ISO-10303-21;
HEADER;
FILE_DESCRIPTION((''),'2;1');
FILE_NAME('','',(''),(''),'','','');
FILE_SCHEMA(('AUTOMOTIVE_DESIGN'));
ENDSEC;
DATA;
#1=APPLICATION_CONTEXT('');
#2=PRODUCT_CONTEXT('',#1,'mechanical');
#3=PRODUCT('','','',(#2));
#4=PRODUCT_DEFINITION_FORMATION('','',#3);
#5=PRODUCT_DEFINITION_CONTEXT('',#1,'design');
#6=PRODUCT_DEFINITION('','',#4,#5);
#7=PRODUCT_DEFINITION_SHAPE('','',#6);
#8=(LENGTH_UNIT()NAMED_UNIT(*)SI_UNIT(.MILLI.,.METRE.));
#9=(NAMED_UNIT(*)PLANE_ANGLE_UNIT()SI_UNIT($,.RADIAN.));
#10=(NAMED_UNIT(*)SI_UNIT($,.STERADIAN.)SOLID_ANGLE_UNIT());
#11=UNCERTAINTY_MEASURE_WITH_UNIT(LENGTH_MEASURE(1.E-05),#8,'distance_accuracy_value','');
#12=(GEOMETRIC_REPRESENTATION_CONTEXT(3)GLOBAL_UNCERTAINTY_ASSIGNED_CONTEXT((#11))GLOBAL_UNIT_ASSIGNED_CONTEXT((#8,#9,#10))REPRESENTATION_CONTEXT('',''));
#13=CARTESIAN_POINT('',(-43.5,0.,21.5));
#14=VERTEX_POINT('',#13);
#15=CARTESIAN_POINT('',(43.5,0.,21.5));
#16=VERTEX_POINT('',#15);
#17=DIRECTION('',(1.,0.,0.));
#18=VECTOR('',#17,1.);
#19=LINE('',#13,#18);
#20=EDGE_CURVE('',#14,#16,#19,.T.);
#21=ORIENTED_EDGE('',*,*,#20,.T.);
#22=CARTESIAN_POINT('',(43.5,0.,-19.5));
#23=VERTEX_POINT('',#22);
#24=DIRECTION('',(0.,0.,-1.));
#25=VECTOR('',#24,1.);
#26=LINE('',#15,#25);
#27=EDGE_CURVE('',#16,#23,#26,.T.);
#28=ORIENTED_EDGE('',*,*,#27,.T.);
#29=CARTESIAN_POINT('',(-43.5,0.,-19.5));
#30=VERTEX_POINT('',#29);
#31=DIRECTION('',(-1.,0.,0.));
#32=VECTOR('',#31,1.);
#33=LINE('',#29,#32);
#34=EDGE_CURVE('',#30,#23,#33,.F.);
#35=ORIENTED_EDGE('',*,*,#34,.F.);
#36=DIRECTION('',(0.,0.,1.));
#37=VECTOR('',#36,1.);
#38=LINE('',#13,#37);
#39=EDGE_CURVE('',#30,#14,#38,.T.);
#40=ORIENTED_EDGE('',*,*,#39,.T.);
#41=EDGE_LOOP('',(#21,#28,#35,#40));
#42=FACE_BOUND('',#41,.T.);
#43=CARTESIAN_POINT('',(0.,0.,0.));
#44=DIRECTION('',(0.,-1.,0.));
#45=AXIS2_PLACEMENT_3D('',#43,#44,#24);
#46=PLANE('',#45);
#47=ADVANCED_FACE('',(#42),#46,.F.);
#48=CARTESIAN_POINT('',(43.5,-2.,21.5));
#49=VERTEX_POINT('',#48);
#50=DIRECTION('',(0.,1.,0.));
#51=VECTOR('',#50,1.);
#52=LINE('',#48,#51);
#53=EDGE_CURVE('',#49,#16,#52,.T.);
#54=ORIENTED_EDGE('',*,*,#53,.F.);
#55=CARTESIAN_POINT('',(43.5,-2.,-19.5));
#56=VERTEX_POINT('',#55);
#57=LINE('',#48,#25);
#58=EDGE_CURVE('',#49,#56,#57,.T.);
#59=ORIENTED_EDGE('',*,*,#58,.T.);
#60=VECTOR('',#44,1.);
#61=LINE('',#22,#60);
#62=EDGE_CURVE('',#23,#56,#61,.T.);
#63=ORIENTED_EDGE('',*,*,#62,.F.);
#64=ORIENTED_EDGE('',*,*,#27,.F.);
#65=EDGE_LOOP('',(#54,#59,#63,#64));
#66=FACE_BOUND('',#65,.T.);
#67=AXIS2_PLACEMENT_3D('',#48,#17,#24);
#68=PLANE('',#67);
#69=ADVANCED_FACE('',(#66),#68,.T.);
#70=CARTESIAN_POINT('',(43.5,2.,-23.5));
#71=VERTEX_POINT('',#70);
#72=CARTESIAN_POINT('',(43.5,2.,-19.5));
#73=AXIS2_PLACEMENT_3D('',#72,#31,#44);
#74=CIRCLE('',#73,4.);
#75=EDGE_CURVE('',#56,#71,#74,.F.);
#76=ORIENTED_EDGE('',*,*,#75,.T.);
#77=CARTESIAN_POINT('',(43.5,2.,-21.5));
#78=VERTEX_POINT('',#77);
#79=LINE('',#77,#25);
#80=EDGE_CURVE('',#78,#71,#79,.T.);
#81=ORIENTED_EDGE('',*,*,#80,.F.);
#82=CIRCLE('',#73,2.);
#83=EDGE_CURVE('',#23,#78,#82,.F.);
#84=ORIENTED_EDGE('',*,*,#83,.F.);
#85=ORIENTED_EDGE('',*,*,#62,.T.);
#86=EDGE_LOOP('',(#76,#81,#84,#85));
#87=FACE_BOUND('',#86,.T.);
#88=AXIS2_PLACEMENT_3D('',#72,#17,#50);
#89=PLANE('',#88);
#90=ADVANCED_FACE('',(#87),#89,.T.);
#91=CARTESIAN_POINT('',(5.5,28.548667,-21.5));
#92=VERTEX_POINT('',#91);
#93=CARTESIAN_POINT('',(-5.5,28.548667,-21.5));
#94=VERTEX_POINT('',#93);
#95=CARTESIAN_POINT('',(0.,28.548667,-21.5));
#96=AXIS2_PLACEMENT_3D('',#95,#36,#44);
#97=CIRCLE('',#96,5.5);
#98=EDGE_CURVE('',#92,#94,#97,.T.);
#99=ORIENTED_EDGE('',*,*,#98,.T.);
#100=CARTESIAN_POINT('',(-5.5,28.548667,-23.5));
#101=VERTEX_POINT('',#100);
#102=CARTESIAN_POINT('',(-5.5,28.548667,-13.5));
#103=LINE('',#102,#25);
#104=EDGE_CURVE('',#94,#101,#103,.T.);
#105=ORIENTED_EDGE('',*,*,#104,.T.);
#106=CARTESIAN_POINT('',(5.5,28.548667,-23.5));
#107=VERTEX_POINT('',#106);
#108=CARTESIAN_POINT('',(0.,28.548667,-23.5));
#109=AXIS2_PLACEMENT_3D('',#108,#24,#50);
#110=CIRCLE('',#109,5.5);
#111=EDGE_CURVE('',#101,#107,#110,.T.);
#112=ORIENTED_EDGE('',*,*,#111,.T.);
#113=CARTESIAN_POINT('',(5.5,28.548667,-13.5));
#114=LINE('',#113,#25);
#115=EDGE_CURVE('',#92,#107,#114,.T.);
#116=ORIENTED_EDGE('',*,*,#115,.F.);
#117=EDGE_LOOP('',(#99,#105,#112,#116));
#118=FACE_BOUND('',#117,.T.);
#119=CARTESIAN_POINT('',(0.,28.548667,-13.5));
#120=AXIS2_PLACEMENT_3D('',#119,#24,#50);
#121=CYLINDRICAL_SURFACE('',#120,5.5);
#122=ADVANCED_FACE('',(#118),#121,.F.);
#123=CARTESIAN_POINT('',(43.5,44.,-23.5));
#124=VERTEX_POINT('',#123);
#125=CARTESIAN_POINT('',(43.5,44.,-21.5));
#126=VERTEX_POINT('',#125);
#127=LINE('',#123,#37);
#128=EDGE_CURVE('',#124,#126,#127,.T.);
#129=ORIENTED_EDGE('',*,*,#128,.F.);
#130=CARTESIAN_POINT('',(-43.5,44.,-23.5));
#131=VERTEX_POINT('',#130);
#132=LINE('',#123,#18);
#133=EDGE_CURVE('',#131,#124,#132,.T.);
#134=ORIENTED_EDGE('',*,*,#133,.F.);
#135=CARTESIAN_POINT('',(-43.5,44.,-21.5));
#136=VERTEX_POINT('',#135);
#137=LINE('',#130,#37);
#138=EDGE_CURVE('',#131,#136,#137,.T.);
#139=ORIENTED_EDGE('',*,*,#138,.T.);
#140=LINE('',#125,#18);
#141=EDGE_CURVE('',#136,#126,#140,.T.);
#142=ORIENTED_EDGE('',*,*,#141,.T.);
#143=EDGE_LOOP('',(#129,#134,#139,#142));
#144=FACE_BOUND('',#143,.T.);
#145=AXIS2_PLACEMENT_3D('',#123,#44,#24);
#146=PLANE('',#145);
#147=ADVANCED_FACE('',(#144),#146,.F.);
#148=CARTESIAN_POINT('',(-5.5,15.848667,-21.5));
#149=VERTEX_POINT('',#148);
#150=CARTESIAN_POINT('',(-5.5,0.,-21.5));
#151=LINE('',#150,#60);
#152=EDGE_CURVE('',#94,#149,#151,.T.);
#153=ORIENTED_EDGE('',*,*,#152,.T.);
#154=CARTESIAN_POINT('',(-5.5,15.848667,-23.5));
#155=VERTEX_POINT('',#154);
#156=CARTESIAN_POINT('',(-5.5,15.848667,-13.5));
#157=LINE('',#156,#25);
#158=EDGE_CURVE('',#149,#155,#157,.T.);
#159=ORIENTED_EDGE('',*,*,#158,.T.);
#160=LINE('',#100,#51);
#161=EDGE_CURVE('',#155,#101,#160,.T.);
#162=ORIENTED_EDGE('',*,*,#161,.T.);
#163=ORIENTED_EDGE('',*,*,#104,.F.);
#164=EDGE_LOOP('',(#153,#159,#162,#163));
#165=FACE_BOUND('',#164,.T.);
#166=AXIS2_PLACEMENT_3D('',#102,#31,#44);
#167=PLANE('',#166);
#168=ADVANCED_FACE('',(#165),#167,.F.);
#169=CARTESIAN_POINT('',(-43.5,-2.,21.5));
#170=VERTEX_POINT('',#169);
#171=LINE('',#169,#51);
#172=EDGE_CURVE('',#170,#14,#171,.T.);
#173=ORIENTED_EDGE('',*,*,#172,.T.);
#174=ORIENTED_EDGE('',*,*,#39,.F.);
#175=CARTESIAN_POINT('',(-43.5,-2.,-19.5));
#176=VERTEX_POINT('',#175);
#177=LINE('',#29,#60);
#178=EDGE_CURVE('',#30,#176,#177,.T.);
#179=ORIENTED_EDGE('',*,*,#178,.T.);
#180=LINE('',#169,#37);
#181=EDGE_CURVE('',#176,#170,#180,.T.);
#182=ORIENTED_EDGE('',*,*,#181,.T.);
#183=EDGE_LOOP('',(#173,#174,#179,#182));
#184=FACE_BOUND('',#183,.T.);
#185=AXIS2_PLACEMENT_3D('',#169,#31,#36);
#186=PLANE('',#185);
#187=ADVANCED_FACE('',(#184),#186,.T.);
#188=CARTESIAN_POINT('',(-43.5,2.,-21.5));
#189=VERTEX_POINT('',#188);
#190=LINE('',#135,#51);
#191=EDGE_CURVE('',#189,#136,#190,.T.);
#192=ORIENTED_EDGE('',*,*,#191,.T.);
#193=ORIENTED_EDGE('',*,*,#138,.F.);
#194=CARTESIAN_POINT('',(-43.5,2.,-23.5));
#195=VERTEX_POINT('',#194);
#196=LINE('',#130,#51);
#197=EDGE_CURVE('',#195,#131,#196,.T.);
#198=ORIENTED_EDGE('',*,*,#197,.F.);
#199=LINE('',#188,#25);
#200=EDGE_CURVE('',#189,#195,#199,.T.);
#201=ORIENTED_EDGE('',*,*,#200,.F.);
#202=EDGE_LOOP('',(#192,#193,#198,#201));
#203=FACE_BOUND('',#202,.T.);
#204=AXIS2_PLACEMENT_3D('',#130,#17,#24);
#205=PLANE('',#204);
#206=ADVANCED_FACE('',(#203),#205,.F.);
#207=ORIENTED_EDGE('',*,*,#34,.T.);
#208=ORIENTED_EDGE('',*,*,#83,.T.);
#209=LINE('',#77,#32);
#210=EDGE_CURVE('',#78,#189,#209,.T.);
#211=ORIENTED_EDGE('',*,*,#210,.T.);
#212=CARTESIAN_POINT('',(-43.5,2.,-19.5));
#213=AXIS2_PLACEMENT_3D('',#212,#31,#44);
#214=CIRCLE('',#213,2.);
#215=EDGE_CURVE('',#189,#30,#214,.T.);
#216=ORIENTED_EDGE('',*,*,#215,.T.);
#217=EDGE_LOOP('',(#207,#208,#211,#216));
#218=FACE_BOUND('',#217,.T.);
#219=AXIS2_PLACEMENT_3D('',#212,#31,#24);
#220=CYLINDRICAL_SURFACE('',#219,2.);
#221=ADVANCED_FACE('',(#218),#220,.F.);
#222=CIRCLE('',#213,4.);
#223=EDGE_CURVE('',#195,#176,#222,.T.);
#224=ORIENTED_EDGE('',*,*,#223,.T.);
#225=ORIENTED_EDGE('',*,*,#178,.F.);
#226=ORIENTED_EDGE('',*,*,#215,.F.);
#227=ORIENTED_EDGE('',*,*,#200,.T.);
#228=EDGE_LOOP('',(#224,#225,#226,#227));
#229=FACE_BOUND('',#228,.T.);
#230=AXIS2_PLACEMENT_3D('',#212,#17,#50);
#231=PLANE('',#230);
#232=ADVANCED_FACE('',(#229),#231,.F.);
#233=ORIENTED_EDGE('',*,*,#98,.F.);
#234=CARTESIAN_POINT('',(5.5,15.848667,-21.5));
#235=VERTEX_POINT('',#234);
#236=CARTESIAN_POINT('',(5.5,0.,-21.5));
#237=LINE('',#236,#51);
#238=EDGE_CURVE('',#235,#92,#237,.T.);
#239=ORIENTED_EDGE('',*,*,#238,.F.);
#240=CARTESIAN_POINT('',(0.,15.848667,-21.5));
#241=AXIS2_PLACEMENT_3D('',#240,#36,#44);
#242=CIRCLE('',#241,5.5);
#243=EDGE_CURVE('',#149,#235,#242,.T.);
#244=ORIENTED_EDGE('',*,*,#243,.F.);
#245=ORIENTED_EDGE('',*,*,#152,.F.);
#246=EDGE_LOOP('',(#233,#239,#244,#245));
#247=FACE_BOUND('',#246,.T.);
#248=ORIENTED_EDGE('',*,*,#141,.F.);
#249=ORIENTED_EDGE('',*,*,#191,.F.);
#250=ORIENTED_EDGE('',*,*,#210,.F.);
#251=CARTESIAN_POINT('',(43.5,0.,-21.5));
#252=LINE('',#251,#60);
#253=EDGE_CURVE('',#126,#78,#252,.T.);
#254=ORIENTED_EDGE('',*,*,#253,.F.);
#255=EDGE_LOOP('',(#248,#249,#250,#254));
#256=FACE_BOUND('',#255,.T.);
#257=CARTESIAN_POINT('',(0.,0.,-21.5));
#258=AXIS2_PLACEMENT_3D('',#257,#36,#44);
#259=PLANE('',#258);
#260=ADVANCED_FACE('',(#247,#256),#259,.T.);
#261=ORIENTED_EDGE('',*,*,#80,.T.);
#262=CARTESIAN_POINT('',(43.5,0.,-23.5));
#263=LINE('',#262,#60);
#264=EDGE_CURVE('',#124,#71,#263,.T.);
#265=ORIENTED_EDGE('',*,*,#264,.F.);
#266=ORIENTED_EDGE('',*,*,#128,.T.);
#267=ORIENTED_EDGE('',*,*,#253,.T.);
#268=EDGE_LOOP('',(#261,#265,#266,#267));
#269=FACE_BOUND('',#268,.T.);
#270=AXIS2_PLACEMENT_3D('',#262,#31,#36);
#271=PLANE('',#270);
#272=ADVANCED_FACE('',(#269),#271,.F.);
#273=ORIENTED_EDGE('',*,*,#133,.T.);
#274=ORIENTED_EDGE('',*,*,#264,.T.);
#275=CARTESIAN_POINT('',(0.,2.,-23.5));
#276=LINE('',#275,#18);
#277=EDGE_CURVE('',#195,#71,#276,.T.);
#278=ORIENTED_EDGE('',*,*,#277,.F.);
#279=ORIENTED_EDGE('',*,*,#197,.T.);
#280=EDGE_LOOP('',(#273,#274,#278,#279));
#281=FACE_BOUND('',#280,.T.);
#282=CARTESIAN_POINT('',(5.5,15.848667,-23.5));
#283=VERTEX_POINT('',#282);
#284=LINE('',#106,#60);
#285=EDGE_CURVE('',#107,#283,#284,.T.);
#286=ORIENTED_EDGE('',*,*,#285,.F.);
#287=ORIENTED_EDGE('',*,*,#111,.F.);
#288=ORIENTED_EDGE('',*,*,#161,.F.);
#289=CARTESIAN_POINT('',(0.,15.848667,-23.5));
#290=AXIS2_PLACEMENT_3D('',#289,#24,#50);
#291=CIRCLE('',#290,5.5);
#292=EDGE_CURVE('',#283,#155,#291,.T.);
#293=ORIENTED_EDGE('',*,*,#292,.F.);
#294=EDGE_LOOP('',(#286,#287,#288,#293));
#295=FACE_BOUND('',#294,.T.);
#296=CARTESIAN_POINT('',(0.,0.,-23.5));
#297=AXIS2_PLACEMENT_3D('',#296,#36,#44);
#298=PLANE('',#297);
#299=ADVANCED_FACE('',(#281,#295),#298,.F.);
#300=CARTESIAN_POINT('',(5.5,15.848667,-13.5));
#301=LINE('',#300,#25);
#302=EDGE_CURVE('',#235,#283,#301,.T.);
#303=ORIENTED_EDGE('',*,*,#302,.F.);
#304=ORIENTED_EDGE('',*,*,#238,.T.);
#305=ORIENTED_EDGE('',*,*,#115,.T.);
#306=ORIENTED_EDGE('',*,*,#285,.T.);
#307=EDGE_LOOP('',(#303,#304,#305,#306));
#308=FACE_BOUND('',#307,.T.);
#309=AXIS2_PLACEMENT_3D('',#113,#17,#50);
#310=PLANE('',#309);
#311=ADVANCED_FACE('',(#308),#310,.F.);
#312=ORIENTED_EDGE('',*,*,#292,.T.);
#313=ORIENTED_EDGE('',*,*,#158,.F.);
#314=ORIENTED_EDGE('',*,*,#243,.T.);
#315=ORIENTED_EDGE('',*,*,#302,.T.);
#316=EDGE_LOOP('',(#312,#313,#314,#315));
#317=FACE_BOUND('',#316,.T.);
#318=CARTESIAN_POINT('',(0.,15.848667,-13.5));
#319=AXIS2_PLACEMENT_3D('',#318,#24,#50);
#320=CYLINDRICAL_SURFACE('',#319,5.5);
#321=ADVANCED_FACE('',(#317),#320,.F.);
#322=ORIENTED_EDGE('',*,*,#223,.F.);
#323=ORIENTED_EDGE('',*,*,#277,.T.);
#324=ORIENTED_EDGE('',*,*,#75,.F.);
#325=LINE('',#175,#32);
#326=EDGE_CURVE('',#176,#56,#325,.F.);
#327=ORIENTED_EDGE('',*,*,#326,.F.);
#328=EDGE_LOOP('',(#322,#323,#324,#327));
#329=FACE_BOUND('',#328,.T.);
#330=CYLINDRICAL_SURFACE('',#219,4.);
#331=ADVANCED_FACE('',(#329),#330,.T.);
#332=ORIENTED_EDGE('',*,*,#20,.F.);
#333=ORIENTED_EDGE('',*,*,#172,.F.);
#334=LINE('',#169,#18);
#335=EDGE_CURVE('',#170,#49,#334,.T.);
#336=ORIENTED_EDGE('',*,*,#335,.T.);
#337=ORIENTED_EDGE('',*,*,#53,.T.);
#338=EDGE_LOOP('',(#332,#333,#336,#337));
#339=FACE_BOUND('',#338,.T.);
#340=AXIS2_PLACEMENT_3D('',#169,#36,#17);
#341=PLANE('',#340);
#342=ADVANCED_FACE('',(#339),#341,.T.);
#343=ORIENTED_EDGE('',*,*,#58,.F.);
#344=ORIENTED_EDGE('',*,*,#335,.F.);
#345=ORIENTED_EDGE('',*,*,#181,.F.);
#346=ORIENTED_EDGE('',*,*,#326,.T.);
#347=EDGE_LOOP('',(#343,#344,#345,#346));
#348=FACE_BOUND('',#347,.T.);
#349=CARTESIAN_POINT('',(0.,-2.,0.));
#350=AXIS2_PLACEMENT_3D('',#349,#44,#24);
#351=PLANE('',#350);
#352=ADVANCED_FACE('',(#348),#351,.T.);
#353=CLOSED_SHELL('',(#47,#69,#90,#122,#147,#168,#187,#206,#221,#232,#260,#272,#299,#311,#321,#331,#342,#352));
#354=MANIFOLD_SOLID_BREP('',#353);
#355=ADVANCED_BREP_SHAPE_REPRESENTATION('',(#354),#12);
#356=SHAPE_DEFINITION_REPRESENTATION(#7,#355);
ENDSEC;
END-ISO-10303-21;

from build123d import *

# Parameters (mm, degrees)
SKETCH1_W                    = 87
SKETCH1_H                    = 43
BASE_FLANGE1_DEPTH           = 2
EDGE_FLANGE1_STRIP_W         = 12
EDGE_FLANGE1_STRIP_H         = 2
EDGE_FLANGE1_STRIP_CUT_DEPTH = 87
EDGE_FLANGE1_DEPTH           = 87
CUT_EXTRUDE1_DEPTH           = 10


# Sheet-metal steps are written as plain solids
with BuildPart() as part:
    # Sketch1 → Base-Flange1 (new body)
    with BuildSketch(Plane(origin=(0, 0, 0), x_dir=(1, 0, 0), z_dir=(0, 1, 0))):
        Rectangle(SKETCH1_W, SKETCH1_H)
    extrude(amount=-BASE_FLANGE1_DEPTH)

    # Edge-Flange1 strip (across the edge) → Edge-Flange1 strip cut (cut)
    with BuildSketch(Plane(origin=(43.5, 0, -21.5), x_dir=(0, 0, 1), z_dir=(-1, 0, 0))):
        with Locations((-4, -1)):
            Rectangle(EDGE_FLANGE1_STRIP_W, EDGE_FLANGE1_STRIP_H)
    extrude(amount=EDGE_FLANGE1_STRIP_CUT_DEPTH, mode=Mode.SUBTRACT)

    # Edge-Flange1 section (across the edge) → Edge-Flange1 (add)
    with BuildSketch(Plane(origin=(43.5, 0, -21.5), x_dir=(0, 0, 1), z_dir=(-1, 0, 0))):
        with BuildLine():
            Line((-2, 2), (-2, 44))
            Line((-2, 44), (0, 44))
            Line((0, 44), (0, 2))
            ThreePointArc((0, 2), (0.585786438, 0.585786438), (2, 0))
            Line((2, 0), (2, -2))
            ThreePointArc((2, -2), (-0.828427125, -0.828427125), (-2, 2))
        make_face()
    extrude(amount=EDGE_FLANGE1_DEPTH)

    # Sketch9 → Cut-Extrude1 (cut)
    with BuildSketch(Plane(origin=(0, 0, -23.5), x_dir=(-1, 0, 0), z_dir=(0, 0, -1))):
        with BuildLine():
            Line((5.5, 28.548666546), (5.5, 15.848666546))
            ThreePointArc((5.5, 15.848666546), (0, 10.348666546), (-5.5, 15.848666546))
            Line((-5.5, 15.848666546), (-5.5, 28.548666546))
            ThreePointArc((-5.5, 28.548666546), (0, 34.048666546), (5.5, 28.548666546))
        make_face()
    extrude(amount=-CUT_EXTRUDE1_DEPTH, mode=Mode.SUBTRACT)


solid = part.part
